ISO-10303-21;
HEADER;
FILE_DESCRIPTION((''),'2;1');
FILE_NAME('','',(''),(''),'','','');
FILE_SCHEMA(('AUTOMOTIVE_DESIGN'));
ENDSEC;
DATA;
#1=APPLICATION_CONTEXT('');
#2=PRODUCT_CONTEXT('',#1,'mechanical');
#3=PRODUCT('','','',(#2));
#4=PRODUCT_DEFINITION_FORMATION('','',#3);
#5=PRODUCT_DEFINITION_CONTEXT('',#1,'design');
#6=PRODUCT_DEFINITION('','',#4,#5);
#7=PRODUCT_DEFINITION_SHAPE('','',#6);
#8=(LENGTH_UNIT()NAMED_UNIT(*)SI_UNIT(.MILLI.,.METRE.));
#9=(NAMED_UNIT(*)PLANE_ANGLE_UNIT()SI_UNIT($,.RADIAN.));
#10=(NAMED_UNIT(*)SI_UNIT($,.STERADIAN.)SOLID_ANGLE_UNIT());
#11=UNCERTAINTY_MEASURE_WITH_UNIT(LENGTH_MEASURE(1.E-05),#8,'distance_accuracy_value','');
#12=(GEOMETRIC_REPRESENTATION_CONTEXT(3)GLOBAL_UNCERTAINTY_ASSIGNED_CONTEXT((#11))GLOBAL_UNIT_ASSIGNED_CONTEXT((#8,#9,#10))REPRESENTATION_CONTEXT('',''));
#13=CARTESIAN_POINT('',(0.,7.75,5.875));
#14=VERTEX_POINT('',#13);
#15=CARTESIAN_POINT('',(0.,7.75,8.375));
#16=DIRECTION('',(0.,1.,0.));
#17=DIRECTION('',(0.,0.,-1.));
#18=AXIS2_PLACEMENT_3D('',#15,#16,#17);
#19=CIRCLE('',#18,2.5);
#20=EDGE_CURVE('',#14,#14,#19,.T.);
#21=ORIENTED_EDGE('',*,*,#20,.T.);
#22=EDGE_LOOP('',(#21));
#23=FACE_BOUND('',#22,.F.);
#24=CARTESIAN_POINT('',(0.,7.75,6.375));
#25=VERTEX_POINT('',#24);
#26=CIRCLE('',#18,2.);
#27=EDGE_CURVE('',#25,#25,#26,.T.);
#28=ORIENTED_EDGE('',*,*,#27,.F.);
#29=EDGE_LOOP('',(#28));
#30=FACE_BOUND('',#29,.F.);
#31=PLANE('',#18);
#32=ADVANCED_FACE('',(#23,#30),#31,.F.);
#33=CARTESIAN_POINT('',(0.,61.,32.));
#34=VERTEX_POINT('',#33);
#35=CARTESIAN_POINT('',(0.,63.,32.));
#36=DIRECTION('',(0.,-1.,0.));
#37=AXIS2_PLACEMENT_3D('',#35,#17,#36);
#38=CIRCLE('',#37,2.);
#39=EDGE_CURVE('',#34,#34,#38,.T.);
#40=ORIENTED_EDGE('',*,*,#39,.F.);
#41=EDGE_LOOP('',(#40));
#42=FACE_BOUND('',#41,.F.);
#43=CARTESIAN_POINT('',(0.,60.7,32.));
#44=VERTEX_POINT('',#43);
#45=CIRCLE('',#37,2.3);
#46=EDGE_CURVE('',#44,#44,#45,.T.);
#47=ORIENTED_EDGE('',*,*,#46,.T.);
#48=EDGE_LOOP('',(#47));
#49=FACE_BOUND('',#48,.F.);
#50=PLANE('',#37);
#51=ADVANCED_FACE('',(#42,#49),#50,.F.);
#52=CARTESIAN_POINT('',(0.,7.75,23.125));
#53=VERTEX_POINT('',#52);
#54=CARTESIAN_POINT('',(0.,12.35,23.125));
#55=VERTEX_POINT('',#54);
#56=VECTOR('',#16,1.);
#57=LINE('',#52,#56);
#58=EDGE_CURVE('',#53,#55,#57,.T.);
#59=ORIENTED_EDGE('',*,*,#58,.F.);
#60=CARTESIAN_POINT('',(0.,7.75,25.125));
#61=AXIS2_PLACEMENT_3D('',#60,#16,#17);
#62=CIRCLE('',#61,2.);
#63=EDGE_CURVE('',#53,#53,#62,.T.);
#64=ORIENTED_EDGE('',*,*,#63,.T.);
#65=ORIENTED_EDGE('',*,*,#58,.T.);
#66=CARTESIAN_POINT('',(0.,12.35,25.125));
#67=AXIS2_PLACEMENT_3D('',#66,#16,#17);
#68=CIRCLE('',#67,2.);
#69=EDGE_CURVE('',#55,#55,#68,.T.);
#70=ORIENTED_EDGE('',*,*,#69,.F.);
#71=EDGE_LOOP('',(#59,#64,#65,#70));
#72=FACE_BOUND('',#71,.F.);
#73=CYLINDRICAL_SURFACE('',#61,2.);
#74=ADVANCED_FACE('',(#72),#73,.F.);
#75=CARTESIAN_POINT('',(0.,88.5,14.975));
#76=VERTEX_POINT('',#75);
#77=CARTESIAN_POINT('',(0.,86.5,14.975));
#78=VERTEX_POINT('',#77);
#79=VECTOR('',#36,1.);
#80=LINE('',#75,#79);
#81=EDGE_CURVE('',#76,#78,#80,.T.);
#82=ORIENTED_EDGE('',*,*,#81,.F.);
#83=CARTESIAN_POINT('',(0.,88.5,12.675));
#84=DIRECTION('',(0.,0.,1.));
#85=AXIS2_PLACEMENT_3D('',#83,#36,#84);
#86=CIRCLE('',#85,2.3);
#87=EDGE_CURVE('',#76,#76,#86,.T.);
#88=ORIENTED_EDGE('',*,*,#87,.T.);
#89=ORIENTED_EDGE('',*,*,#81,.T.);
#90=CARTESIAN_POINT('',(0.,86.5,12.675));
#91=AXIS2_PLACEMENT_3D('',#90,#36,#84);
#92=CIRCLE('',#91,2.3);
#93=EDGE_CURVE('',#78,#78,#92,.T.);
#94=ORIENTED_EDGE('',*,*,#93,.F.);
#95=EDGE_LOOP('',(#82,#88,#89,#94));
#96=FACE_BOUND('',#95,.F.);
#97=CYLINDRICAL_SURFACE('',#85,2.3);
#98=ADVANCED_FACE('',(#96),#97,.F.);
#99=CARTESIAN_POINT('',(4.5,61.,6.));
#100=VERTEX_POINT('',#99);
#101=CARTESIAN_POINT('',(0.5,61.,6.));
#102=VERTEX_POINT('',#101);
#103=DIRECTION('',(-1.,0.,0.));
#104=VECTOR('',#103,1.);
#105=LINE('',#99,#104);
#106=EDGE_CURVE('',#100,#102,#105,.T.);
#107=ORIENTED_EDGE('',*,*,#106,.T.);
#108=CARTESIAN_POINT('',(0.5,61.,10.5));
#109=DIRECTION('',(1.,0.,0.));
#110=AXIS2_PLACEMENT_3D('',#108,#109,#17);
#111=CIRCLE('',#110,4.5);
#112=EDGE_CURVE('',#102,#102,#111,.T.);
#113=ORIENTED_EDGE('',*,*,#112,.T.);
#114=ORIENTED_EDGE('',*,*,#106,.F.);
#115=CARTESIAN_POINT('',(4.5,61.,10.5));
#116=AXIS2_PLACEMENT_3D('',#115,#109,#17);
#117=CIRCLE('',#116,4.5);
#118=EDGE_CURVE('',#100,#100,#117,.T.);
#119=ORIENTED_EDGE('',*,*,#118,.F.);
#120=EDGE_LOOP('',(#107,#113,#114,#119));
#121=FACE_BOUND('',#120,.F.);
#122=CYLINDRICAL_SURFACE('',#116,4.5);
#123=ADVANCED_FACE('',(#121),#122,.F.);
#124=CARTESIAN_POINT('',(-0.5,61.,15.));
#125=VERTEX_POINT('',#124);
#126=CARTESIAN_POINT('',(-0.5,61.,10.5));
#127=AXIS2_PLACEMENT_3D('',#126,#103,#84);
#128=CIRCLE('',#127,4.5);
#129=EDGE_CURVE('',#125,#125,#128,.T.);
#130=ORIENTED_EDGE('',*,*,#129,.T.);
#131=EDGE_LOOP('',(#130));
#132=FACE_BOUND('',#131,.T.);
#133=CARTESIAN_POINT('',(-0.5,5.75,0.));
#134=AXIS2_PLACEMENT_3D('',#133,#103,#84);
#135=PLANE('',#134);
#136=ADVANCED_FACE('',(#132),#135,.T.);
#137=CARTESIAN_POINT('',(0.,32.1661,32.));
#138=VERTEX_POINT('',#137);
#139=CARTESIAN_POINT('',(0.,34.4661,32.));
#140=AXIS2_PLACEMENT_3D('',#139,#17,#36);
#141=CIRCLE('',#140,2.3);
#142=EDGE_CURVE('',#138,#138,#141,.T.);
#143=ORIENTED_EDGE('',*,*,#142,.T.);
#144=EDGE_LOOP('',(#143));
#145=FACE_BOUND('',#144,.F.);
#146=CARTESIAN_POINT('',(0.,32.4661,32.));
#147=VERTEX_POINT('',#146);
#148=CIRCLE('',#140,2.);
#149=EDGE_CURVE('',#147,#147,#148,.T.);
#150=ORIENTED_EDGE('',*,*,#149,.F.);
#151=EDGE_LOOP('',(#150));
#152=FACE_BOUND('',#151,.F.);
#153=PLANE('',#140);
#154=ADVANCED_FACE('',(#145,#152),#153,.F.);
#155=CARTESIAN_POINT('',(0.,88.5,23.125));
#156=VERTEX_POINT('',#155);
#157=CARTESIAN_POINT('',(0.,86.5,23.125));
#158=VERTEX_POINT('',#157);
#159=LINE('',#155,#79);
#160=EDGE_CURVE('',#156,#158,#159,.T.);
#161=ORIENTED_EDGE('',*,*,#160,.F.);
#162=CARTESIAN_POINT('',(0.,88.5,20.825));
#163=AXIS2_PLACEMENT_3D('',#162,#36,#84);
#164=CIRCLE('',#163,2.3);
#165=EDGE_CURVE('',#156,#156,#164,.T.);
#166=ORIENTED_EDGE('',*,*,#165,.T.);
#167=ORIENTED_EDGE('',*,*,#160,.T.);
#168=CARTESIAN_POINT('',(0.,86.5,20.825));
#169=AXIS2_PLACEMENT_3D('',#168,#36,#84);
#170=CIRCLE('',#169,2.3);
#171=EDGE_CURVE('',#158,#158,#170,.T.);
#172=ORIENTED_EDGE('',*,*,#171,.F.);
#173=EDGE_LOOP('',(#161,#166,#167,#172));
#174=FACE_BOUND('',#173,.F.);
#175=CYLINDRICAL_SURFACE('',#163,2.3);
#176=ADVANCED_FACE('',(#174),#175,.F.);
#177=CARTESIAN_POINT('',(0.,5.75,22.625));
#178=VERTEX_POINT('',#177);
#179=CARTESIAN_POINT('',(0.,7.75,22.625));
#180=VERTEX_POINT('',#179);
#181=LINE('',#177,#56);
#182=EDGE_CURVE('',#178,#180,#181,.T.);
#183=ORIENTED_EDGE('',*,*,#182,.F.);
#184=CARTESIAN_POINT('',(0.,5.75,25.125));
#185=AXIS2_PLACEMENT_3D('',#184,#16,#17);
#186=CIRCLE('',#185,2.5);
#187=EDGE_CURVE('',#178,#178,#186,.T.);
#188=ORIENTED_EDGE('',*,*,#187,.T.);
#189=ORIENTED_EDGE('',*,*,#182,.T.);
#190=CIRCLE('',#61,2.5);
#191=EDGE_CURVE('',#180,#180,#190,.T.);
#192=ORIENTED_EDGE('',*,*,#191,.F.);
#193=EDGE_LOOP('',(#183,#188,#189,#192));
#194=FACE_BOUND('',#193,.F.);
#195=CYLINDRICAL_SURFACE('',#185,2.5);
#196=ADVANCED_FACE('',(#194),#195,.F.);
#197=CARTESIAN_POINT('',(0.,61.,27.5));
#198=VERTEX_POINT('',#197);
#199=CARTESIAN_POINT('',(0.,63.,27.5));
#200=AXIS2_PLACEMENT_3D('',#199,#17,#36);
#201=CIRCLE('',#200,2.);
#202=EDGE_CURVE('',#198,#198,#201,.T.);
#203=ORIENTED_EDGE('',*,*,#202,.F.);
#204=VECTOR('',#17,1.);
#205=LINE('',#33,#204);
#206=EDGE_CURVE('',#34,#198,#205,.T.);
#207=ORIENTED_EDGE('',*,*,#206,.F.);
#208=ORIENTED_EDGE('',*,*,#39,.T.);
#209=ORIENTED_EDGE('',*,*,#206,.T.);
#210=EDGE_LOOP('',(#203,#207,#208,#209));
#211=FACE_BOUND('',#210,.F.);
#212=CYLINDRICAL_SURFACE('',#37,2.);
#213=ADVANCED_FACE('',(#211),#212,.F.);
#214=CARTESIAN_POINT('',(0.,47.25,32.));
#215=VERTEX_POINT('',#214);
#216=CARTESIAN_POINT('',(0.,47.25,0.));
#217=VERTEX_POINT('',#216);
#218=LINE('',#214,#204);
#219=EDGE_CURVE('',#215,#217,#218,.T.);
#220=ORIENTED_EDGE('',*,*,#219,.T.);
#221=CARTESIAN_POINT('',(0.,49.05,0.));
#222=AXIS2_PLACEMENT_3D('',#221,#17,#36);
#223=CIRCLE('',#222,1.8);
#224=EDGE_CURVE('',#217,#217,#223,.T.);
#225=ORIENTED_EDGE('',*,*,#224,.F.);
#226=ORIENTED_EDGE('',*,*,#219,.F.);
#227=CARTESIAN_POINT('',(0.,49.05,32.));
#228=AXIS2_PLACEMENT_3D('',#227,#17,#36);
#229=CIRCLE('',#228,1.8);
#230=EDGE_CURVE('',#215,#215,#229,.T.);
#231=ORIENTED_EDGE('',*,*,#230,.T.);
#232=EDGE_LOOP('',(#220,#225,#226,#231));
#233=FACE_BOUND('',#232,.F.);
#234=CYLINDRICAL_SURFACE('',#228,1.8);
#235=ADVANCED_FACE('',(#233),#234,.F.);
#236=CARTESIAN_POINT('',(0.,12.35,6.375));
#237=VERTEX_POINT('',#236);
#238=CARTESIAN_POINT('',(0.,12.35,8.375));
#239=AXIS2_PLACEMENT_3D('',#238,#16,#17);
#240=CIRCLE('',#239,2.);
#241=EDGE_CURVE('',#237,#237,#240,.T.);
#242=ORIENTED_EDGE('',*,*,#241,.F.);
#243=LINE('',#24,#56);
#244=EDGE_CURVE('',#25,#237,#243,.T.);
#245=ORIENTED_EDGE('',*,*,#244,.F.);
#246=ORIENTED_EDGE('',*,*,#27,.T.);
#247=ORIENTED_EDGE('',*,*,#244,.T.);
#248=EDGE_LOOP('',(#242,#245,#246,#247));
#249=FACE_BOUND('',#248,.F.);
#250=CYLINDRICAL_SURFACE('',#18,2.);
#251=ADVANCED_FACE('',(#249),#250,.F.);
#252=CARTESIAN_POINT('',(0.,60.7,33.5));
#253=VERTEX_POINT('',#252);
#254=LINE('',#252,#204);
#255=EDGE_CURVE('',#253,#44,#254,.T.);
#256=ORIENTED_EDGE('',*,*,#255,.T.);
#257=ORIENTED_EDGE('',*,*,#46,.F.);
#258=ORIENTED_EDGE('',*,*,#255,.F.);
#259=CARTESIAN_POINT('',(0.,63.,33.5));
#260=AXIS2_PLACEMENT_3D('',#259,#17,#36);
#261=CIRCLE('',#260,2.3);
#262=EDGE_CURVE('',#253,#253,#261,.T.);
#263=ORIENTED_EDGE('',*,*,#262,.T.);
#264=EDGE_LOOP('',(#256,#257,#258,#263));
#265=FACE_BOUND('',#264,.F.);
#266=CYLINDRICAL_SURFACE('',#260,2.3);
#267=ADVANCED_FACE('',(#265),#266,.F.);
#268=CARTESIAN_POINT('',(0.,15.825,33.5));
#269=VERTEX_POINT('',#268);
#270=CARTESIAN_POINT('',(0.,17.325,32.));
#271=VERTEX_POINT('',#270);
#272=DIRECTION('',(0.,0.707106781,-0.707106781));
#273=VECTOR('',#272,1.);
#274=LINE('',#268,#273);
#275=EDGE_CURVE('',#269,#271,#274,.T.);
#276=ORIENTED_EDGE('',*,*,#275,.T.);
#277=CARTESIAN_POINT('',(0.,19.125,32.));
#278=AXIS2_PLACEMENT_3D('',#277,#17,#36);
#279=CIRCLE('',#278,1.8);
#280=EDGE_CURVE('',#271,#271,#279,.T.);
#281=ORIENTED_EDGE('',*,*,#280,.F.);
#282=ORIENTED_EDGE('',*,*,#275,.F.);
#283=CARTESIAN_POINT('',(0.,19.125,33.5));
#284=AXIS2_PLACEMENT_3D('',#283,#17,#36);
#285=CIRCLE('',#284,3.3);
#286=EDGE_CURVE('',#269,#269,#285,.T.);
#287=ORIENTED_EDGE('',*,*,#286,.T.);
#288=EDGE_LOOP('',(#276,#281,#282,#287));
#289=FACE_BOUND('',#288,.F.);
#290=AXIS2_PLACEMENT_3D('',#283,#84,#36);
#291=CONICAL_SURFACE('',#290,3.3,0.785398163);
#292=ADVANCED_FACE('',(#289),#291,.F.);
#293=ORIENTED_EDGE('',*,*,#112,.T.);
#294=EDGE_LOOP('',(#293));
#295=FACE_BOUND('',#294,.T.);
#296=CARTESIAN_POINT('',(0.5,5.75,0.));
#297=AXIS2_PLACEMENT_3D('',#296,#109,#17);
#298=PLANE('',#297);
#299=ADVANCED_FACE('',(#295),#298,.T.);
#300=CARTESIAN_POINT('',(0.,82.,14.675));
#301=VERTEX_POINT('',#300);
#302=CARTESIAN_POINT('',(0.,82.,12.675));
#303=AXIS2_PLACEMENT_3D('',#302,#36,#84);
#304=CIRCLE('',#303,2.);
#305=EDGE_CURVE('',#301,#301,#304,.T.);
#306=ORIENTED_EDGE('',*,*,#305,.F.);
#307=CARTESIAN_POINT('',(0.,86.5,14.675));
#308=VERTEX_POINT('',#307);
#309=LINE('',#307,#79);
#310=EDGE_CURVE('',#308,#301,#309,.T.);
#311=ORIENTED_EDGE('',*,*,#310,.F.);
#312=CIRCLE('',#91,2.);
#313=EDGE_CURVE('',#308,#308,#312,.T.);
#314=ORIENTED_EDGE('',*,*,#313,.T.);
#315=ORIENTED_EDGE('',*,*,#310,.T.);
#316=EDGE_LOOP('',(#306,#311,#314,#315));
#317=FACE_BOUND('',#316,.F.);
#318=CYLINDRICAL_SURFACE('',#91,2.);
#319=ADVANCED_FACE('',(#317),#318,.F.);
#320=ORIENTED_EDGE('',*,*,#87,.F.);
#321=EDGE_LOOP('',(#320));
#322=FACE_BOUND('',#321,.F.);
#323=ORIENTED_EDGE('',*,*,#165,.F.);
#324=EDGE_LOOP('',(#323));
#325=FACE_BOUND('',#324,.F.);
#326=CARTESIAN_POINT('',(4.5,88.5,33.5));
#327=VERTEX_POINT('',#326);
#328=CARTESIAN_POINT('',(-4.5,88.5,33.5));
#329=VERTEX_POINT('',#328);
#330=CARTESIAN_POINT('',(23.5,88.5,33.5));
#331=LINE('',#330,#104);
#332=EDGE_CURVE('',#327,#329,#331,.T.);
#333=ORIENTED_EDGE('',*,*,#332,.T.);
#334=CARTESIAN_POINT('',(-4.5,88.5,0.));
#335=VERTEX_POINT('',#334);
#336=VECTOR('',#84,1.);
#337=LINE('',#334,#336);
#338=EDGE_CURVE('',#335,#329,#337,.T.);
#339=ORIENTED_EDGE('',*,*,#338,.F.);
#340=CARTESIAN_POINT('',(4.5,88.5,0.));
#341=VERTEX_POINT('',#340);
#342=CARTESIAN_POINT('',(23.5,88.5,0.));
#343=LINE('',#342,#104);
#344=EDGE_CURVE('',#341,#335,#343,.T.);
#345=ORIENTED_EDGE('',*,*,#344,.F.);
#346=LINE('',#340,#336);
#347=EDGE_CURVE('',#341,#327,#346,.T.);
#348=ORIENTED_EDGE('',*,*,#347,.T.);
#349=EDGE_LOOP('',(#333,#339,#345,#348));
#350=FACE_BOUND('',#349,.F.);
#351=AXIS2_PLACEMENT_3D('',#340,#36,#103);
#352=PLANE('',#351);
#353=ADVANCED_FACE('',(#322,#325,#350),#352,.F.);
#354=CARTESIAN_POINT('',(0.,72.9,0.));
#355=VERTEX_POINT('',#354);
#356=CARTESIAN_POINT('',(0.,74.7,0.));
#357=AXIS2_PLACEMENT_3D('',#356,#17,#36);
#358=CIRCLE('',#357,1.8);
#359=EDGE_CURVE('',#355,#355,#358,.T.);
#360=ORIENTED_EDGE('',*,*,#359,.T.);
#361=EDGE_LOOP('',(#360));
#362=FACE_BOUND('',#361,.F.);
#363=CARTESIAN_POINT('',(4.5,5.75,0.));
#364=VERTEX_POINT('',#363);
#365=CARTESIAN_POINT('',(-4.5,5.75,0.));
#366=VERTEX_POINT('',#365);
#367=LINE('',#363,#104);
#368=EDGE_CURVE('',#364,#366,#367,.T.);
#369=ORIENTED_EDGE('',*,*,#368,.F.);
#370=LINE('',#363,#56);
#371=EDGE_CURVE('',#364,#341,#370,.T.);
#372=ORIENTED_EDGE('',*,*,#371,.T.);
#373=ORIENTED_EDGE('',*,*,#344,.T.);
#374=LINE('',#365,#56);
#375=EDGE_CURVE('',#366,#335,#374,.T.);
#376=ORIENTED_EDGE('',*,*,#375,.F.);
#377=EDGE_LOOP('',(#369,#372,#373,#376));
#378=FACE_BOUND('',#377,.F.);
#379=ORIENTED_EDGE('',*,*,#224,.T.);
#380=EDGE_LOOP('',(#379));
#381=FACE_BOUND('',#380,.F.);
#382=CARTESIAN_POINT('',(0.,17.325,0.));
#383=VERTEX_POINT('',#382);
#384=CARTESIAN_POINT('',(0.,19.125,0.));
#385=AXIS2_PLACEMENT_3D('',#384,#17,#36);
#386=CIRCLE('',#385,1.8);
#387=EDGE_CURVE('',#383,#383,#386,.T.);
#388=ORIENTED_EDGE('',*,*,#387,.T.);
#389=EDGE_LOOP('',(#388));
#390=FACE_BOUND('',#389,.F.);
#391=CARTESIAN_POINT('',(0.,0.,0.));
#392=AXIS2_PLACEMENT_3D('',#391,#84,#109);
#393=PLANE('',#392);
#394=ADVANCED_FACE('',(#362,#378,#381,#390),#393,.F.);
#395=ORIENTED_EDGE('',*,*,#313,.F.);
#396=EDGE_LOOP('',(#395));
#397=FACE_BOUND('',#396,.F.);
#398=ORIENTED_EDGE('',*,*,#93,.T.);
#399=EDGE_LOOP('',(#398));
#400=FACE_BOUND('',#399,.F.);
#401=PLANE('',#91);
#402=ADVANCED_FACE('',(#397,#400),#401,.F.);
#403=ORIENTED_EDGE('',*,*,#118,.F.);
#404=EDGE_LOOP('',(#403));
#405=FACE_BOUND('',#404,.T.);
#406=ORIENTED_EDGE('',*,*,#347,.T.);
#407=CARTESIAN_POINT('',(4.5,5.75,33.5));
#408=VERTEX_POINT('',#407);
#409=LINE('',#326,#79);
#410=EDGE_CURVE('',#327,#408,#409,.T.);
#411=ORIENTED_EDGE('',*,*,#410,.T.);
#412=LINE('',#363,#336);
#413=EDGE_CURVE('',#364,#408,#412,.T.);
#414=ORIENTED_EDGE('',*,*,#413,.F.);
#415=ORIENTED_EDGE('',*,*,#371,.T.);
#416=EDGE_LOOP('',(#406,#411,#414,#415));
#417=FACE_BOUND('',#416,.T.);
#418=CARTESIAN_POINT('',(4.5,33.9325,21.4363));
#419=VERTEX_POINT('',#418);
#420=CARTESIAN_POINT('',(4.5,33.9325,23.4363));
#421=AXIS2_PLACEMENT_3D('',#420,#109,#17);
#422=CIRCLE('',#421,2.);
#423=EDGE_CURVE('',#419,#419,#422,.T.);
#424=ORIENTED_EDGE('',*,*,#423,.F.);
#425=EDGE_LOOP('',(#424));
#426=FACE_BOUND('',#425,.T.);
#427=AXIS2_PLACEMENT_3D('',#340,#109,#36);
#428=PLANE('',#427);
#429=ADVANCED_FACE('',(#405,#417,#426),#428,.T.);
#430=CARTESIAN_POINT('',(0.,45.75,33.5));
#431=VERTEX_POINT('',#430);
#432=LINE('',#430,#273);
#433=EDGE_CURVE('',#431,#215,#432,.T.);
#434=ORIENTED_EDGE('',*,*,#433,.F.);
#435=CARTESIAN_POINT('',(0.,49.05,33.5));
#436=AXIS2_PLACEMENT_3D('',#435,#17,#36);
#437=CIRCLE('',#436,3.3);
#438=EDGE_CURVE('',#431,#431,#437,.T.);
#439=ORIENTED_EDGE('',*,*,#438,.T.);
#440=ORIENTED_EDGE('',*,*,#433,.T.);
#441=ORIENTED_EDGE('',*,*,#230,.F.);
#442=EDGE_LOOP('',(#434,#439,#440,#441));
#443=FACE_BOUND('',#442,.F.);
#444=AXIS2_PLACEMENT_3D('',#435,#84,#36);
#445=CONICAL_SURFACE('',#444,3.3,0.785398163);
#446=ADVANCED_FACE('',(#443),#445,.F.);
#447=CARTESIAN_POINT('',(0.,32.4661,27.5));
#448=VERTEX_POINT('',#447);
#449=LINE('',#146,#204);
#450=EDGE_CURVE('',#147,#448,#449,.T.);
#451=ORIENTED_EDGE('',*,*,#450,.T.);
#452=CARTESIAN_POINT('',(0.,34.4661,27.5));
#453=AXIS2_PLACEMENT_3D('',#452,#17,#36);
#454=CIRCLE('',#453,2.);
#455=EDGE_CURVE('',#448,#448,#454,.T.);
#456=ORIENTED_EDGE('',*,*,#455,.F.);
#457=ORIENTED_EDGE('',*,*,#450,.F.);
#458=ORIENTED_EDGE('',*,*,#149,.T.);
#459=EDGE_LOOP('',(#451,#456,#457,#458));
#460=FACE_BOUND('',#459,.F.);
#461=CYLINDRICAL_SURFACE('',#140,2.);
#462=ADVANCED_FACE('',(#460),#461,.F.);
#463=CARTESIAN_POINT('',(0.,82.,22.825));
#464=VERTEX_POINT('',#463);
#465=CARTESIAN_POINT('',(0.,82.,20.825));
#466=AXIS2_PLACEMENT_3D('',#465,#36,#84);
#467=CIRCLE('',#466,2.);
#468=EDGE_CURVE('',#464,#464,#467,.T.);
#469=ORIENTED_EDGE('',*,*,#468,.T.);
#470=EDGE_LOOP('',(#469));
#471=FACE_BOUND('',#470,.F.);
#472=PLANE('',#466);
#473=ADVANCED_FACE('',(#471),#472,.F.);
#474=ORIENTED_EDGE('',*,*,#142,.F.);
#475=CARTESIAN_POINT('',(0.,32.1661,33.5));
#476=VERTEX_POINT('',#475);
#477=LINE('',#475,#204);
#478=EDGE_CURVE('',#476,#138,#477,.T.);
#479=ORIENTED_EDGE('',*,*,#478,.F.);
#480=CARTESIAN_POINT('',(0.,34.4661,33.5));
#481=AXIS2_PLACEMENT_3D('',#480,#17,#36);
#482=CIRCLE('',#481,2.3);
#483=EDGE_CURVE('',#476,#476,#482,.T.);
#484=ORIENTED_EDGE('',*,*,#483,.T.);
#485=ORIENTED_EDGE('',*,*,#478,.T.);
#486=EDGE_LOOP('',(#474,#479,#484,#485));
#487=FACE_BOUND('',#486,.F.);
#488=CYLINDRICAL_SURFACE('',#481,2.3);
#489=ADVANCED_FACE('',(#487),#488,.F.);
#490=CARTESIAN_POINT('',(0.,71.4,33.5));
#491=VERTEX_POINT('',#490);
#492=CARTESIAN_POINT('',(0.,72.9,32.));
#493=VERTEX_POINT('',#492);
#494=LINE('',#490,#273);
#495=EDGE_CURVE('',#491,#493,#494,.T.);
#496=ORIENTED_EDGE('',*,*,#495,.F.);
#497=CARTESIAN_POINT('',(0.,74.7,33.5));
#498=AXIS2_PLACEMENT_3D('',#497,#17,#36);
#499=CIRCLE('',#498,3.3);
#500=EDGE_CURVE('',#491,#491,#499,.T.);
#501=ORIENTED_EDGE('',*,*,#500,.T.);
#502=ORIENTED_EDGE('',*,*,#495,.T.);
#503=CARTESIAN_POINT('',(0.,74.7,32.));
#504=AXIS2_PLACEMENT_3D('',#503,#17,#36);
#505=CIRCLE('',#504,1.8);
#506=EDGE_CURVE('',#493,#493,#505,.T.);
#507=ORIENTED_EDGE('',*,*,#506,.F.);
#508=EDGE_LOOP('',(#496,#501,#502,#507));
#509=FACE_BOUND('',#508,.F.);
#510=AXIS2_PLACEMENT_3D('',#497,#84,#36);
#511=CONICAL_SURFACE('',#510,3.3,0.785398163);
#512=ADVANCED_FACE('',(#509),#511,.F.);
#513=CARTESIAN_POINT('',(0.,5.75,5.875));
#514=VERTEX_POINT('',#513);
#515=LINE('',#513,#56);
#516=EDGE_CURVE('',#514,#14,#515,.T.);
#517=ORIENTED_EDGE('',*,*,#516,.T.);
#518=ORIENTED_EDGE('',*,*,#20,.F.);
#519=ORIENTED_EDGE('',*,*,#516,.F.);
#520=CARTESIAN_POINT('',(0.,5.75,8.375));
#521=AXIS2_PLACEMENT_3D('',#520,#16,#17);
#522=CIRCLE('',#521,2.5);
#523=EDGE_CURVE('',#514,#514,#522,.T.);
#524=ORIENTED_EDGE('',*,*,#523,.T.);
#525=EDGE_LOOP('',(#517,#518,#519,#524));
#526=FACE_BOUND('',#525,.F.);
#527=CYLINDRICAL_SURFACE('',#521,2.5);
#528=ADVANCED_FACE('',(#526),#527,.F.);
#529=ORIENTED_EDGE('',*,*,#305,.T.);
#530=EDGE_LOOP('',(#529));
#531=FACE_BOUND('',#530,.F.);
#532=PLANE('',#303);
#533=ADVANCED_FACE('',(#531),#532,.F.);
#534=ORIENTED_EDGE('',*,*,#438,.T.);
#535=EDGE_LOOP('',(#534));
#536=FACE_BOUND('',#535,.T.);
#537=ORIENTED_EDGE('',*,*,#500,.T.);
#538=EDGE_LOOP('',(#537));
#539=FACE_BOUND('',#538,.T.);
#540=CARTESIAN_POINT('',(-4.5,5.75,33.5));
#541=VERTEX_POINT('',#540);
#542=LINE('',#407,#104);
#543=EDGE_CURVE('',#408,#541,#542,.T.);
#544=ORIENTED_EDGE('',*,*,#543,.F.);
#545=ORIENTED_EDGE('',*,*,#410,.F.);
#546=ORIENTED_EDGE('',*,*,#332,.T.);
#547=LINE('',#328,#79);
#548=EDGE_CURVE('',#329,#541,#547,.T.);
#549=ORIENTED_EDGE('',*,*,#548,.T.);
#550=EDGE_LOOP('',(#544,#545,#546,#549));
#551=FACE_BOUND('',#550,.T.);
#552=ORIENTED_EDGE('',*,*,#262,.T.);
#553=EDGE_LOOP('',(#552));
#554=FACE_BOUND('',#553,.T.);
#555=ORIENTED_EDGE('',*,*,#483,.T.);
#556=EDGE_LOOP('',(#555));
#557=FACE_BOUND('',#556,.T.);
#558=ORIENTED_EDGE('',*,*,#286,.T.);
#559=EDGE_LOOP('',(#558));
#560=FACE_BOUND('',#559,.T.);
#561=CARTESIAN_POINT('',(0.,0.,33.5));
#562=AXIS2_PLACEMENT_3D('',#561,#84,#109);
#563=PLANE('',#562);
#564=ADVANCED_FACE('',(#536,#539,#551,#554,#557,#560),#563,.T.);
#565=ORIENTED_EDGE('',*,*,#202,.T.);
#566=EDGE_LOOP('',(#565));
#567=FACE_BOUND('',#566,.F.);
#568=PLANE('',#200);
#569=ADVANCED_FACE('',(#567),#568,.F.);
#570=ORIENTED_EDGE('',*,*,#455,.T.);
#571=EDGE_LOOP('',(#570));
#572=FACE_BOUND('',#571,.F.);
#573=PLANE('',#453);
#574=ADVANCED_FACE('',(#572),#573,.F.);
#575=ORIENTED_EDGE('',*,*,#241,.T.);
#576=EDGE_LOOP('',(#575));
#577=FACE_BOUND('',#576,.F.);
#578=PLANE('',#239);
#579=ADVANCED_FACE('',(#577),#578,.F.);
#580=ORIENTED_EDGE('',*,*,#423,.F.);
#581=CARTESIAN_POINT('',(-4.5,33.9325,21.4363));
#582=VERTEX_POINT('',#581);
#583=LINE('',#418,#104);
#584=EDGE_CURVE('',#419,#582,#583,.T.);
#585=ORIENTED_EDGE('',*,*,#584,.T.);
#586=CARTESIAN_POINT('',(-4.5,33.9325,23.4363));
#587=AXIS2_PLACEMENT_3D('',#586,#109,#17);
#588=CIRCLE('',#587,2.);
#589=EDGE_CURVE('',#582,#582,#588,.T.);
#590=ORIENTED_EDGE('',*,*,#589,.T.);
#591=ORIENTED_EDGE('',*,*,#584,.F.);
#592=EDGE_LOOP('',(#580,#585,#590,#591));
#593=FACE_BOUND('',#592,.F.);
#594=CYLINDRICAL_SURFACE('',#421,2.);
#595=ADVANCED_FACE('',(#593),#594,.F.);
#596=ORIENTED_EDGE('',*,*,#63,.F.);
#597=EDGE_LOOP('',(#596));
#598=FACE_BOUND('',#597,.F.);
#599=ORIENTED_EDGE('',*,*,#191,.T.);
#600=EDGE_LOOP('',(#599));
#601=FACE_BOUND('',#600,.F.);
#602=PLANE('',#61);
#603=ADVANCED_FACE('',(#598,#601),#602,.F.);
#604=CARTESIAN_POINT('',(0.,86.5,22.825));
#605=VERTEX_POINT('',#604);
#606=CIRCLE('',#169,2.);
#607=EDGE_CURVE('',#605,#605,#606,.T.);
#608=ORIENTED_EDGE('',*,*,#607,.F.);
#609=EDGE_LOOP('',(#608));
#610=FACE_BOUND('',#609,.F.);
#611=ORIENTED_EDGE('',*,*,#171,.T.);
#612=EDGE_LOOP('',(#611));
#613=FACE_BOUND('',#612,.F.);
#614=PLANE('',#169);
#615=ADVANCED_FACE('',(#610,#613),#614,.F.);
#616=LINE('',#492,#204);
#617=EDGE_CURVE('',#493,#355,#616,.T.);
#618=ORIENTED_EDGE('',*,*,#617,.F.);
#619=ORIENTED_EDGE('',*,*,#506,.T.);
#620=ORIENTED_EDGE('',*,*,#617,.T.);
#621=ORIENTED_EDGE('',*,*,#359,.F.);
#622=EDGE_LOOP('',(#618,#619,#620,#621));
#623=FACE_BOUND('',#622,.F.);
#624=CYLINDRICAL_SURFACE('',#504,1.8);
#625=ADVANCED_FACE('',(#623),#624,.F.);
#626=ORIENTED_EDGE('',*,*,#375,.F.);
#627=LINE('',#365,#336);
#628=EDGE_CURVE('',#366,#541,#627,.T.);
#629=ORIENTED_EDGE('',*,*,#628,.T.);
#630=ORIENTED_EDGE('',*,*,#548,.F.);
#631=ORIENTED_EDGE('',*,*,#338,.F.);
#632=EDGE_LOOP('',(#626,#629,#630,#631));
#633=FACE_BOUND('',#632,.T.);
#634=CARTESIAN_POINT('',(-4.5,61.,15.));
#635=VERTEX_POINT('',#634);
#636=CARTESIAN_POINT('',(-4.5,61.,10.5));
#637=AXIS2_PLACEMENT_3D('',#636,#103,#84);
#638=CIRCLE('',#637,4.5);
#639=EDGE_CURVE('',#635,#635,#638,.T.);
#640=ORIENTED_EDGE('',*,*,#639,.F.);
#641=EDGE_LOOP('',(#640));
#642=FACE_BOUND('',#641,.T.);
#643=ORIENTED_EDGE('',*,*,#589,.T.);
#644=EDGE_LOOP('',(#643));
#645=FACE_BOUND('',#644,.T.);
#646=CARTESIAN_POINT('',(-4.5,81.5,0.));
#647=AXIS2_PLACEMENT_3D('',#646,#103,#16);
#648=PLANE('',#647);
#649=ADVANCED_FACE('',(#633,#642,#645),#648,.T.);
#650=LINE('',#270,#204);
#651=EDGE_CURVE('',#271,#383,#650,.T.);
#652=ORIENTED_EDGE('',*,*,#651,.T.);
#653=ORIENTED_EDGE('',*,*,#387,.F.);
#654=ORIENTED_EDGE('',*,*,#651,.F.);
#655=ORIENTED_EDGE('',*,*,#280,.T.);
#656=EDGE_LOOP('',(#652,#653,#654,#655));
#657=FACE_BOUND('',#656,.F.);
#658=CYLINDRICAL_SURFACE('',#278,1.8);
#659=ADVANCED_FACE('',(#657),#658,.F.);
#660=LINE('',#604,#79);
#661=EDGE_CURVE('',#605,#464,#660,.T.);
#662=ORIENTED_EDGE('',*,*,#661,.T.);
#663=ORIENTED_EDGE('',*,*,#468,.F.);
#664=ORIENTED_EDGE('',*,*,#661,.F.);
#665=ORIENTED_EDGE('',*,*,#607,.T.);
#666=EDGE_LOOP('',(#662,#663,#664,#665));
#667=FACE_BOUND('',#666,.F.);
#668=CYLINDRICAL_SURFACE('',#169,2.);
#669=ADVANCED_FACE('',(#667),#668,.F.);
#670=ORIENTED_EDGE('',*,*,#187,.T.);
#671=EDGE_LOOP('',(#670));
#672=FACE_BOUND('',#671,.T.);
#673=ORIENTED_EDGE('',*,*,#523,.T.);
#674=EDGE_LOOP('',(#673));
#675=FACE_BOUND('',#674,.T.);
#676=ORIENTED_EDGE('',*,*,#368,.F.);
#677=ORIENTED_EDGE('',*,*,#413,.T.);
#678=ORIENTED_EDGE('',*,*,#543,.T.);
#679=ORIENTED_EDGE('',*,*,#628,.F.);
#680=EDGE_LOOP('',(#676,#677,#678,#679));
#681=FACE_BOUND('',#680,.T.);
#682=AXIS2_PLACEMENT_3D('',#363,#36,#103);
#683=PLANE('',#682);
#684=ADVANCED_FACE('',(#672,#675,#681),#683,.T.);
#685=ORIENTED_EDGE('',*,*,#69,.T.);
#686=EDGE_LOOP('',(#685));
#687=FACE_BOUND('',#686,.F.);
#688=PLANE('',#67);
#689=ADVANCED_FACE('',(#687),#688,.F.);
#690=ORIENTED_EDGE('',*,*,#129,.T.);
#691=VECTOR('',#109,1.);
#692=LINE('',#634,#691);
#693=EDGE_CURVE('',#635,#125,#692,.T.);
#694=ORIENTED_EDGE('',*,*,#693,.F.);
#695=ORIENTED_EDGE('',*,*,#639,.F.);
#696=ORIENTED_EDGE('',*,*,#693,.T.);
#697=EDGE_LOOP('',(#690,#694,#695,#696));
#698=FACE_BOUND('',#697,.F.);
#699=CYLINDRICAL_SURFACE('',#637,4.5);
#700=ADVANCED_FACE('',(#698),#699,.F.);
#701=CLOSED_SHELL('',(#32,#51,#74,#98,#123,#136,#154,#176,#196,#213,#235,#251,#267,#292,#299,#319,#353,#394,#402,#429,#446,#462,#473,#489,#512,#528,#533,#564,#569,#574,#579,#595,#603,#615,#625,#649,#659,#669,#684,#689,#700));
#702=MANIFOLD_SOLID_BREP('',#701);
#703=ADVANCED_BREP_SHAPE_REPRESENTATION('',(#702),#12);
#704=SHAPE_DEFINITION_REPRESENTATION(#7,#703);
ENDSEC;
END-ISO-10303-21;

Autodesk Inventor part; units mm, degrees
ref_plane "YZ Plane" through (0, 0, 0) normal (1, 0, 0) x (0, 1, 0)
ref_plane "XZ Plane" through (0, 0, 0) normal (0, 1, 0) x (-1, 0, 0)
ref_plane "Work Plane1" through (0, 0, 0) normal (0, 0, 1) x (1, 0, 0)
ref_plane "Work Plane2" through (-89, -40.3889, 33.5) normal (0, 0, 1) x (1, 0, 0)
sketch "Sketch1" plane through (0, 0, 0) normal (0, 0, 1) x (1, 0, 0)
  line L0 (23.5, 88.5) -> (-23.5, 88.5) projected
  line L1 (-23.5, 88.5) -> (-23.5, 36.5) projected
  line L2 (-26.5, 33.5) -> (-89, 33.5) projected
  line L3 (-89, 33.5) -> (-89, -72.5) projected
  line L4 (-89, -72.5) -> (-77, -72.5) projected
  line L5 (-74, -75.5) -> (-74, -93.5) projected
  line L6 (-74, -93.5) -> (74, -93.5) projected
  line L7 (74, -93.5) -> (74, -75.5) projected
  line L8 (77, -72.5) -> (89, -72.5) projected
  line L9 (89, -72.5) -> (89, 33.5) projected
  line L10 (89, 33.5) -> (26.5, 33.5) projected
  line L11 (23.5, 36.5) -> (23.5, 88.5) projected
  line L12 (-4.5, 81.5) -> (-4.5, 36.5) projected
  line L13 (-7.5, 33.5) -> (-13.5, 33.5) projected
  line L14 (-16.5, 36.5) -> (-16.5, 81.5) projected
  line L15 (7.5, 84.5) -> (13.5, 84.5) projected
  line L16 (16.5, 81.5) -> (16.5, 36.5) projected
  line L17 (13.5, 33.5) -> (7.5, 33.5) projected
  line L18 (4.5, 36.5) -> (4.5, 81.5) projected
  line L19 (-13.5, 84.5) -> (-7.5, 84.5) projected
  line L20 (-4.5, 88.5) -> (4.5, 88.5)
  line L21 (4.5, 88.5) -> (4.5, 5.75)
  line L22 (4.5, 5.75) -> (-4.5, 5.75)
  line L23 (-4.5, 5.75) -> (-4.5, 88.5)
  line L24 (-32.2, 4.75) -> (-59.9, 4.75)
  arc A0 (13.5, 33.5) -> (16.5, 36.5) centre (13.5, 36.5) ccw projected
  arc A1 (4.5, 36.5) -> (7.5, 33.5) centre (7.5, 36.5) ccw projected
  arc A2 (7.5, 84.5) -> (4.5, 81.5) centre (7.5, 81.5) ccw projected
  arc A3 (16.5, 81.5) -> (13.5, 84.5) centre (13.5, 81.5) ccw projected
  arc A4 (-4.5, 81.5) -> (-7.5, 84.5) centre (-7.5, 81.5) ccw projected
  arc A5 (-7.5, 33.5) -> (-4.5, 36.5) centre (-7.5, 36.5) ccw projected
  arc A6 (-16.5, 36.5) -> (-13.5, 33.5) centre (-13.5, 36.5) ccw projected
  arc A7 (-13.5, 84.5) -> (-16.5, 81.5) centre (-13.5, 81.5) ccw projected
  arc A8 (-26.5, 33.5) -> (-23.5, 36.5) centre (-26.5, 36.5) ccw projected
  arc A9 (-74, -75.5) -> (-77, -72.5) centre (-77, -75.5) ccw projected
  arc A10 (77, -72.5) -> (74, -75.5) centre (77, -75.5) ccw projected
  arc A11 (23.5, 36.5) -> (26.5, 33.5) centre (26.5, 36.5) ccw projected
  circle A12 centre (39.125, 25.9125) radius 1.0065 projected
  circle A13 centre (72.95, 12.275) radius 1.0065 projected
  circle A14 centre (86, 30.5) radius 1.0065 projected
  circle A15 centre (-86, 30.5) radius 1.0065 projected
  circle A16 centre (-39.125, 12.3375) radius 1.0065 projected
  circle A17 centre (-72.95, 25.975) radius 1.0065 projected
  circle A18 centre (-72.95, 12.275) radius 1.0065 projected
  circle A19 centre (-39.125, 25.9125) radius 1.0065 projected
  circle A20 centre (-86, 7.75) radius 1.0065 projected
  circle A21 centre (86, 7.75) radius 1.0065 projected
  circle A22 centre (72.95, 25.975) radius 1.0065 projected
  circle A23 centre (39.125, 12.3375) radius 1.0065 projected
  circle A24 centre (-24.1, -73.1) radius 1.2295 projected
  circle A25 centre (-42.4984, -44.6666) radius 1.2295 projected
  circle A26 centre (-79, -42.3889) radius 1.2295 projected
  circle A27 centre (-19.5, 28.875) radius 1.2295 projected
  circle A28 centre (19.5, 9.55) radius 1.2295 projected
  circle A29 centre (19.5, 47.3) radius 1.2295 projected
  circle A30 centre (-19.5, 47.3) radius 1.2295 projected
  circle A31 centre (0, 74.7) radius 1.2295 projected
  circle A32 centre (-19.4231, 74.8077) radius 1.2295 projected
  circle A33 centre (19.5, 74.7) radius 1.2295 projected
  circle A34 centre (0, 49.05) radius 1.2295 projected
  circle A35 centre (19.5, 28.875) radius 1.2295 projected
  circle A36 centre (0, 19.125) radius 1.2295 projected
  circle A37 centre (-19.5, 9.55) radius 1.2295 projected
  circle A38 centre (24.1, -73.1) radius 1.2295 projected
  circle A39 centre (42.5, -44.6649) radius 1.2295 projected
  circle A40 centre (79, -42.3889) radius 1.2295 projected
  circle A41 centre (21.5, -85.5) radius 1.8 projected
  circle A42 centre (-64.5, -85.5) radius 1.8 projected
  circle A43 centre (-83.4, -19.2889) radius 1.8 projected
  circle A44 centre (-21.5, -85.5) radius 1.8 projected
  circle A45 centre (64.5, -85.5) radius 1.8 projected
  line L25 (-58.2315, -77.6013) -> (-77.7685, -63.3434) projected
  line L26 (-79, -36.3889) -> (-79, 1.75) projected
  line L27 (-75.7766, -45.4056) -> (-47.1423, -47.5438) projected
  line L28 (-21.1, -26.5751) -> (-21.1, -22.0255) projected
  line L29 (-46.9357, -41.5592) -> (-76, -39.3889) projected
  line L30 (-79, -60.9201) -> (-79, -48.3972) projected
  line L31 (32.0924, 4.75) -> (76, 4.75) projected
  line L32 (79, 1.75) -> (79, -36.3889) projected
  line L33 (76, -39.3889) -> (46.9371, -41.5577) projected
  line L34 (21.1, -22.0255) -> (21.1, -26.5749) projected
  line L35 (47.144, -47.5423) -> (76, -45.3889) projected
  line L36 (79, -48.3889) -> (79, -60.9201) projected
  line L37 (77.7685, -63.3434) -> (58.2315, -77.6013) projected
  line L38 (57, -80.0246) -> (57, -87.5) projected
  arc A46 (55, -89.5) -> (57, -87.5) centre (55, -87.5) ccw projected
  line L39 (55, -89.5) -> (31, -89.5) projected
  arc A47 (29, -87.5) -> (31, -89.5) centre (31, -87.5) ccw projected
  line L40 (29, -87.5) -> (29, -79.2522) projected
  line L41 (14, -79.5039) -> (14, -87.5) projected
  arc A48 (12, -89.5) -> (14, -87.5) centre (12, -87.5) ccw projected
  line L42 (12, -89.5) -> (-12, -89.5) projected
  arc A49 (-14, -87.5) -> (-12, -89.5) centre (-12, -87.5) ccw projected
  line L43 (-14, -87.5) -> (-14, -79.5039) projected
  line L44 (-29, -79.2522) -> (-29, -87.5) projected
  arc A50 (-31, -89.5) -> (-29, -87.5) centre (-31, -87.5) ccw projected
  line L45 (-31, -89.5) -> (-55, -89.5) projected
  arc A51 (-57, -87.5) -> (-55, -89.5) centre (-55, -87.5) ccw projected
  line L46 (-57, -87.5) -> (-57, -80.0246) projected
  line L47 (-66.95, 28.9125) -> (-45.125, 28.9125) projected
  line L48 (-42.125, 25.9125) -> (-42.125, 12.275) projected
  line L49 (-45.125, 9.275) -> (-66.95, 9.275) projected
  line L50 (-69.95, 12.275) -> (-69.95, 25.9125) projected
  line L51 (-16.5, 12.75) -> (-16.5, 25.5) projected
  line L52 (-13.5, 28.5) -> (-7.5, 28.5) projected
  line L53 (-4.5, 25.5) -> (-4.5, 12.75) projected
  line L54 (-7.5, 9.75) -> (-13.5, 9.75) projected
  line L55 (66.95, 9.3375) -> (45.125, 9.3375) projected
  line L56 (42.125, 12.3375) -> (42.125, 25.975) projected
  line L57 (45.125, 28.975) -> (66.95, 28.975) projected
  line L58 (69.95, 25.975) -> (69.95, 12.3375) projected
  line L59 (4.5, 12.75) -> (4.5, 25.5) projected
  line L60 (7.5, 28.5) -> (13.5, 28.5) projected
  line L61 (16.5, 25.5) -> (16.5, 12.75) projected
  line L62 (13.5, 9.75) -> (7.5, 9.75) projected
  line L63 (44.5181, -40.6102) -> (28.0046, -22.8717) projected
  line L64 (27.2109, -20.577) -> (29.1029, 2.0005) projected
  line L65 (-44.7206, -49.1201) -> (-29.3549, -77.8368) projected
  line L66 (-76, 4.75) -> (-32.0924, 4.75) projected
  line L67 (-29.1029, 2.0005) -> (-27.2109, -20.5772) projected
  line L68 (-28.0044, -22.8717) -> (-44.5164, -40.6115) projected
  line L69 (29.3549, -77.8368) -> (44.7222, -49.1185) projected
  line L70 (-14.6042, -77.6983) -> (-37.8537, -46.8489) projected
  line L71 (-37.4786, -42.8259) -> (-22.0793, -28.7924) projected
  line L72 (-21.1105, -21.775) -> (-23.0609, 1.4995) projected
  line L73 (-20.0714, 4.75) -> (20.0714, 4.75) projected
  line L74 (23.0609, 1.4995) -> (21.1105, -21.775) projected
  line L75 (22.0795, -28.7925) -> (37.4798, -42.8243) projected
  line L76 (37.8551, -46.8475) -> (14.6042, -77.6983) projected
  circle A52 centre (-78, -67.1725) radius 1.2295 projected
  arc A53 (76, -39.3889) -> (79, -36.3889) centre (76, -36.3889) ccw projected
  arc A54 (44.5181, -40.6102) -> (46.9371, -41.5577) centre (46.7138, -38.566) ccw projected
  arc A55 (27.2109, -20.577) -> (28.0046, -22.8717) centre (30.2004, -20.8276) ccw projected
  arc A56 (32.0924, 4.75) -> (29.1029, 2.0005) centre (32.0924, 1.75) ccw projected
  arc A57 (79, 1.75) -> (76, 4.75) centre (76, 1.75) ccw projected
  arc A58 (-42.125, 25.9125) -> (-45.125, 28.9125) centre (-45.125, 25.9125) ccw projected
  arc A59 (-45.125, 9.275) -> (-42.125, 12.275) centre (-45.125, 12.275) ccw projected
  arc A60 (-69.95, 12.275) -> (-66.95, 9.275) centre (-66.95, 12.275) ccw projected
  arc A61 (-66.95, 28.9125) -> (-69.95, 25.9125) centre (-66.95, 25.9125) ccw projected
  arc A62 (-13.5, 28.5) -> (-16.5, 25.5) centre (-13.5, 25.5) ccw projected
  arc A63 (-4.5, 25.5) -> (-7.5, 28.5) centre (-7.5, 25.5) ccw projected
  arc A64 (-7.5, 9.75) -> (-4.5, 12.75) centre (-7.5, 12.75) ccw projected
  arc A65 (-16.5, 12.75) -> (-13.5, 9.75) centre (-13.5, 12.75) ccw projected
  arc A66 (58.2315, -77.6013) -> (57, -80.0246) centre (60, -80.0246) ccw projected
  arc A67 (29.3549, -77.8368) -> (29, -79.2522) centre (32, -79.2522) ccw projected
  arc A68 (47.144, -47.5423) -> (44.7222, -49.1185) centre (47.3673, -50.5339) ccw projected
  arc A69 (79, -48.3889) -> (76, -45.3889) centre (76, -48.3889) ccw projected
  arc A70 (77.7685, -63.3434) -> (79, -60.9201) centre (76, -60.9201) ccw projected
  arc A71 (-21.1, -22.0255) -> (-21.1105, -21.775) centre (-24.1, -22.0255) ccw projected
  arc A72 (-20.0714, 4.75) -> (-23.0609, 1.4995) centre (-20.0714, 1.75) ccw projected
  arc A73 (23.0609, 1.4995) -> (20.0714, 4.75) centre (20.0714, 1.75) ccw projected
  arc A74 (21.1105, -21.775) -> (21.1, -22.0255) centre (24.1, -22.0255) ccw projected
  arc A75 (21.1, -26.5749) -> (22.0795, -28.7925) centre (24.1, -26.5749) ccw projected
  arc A76 (37.8551, -46.8475) -> (37.4798, -42.8243) centre (35.4593, -45.0419) ccw projected
  arc A77 (14.6042, -77.6983) -> (14, -79.5039) centre (17, -79.5039) ccw projected
  arc A78 (-14, -79.5039) -> (-14.6042, -77.6983) centre (-17, -79.5039) ccw projected
  arc A79 (-37.4786, -42.8259) -> (-37.8537, -46.8489) centre (-35.4579, -45.0433) ccw projected
  arc A80 (-22.0793, -28.7924) -> (-21.1, -26.5751) centre (-24.1, -26.5751) ccw projected
  arc A81 (-79, -36.3889) -> (-76, -39.3889) centre (-76, -36.3889) ccw projected
  arc A82 (-76, 4.75) -> (-79, 1.75) centre (-76, 1.75) ccw projected
  arc A83 (-29.1029, 2.0005) -> (-32.0924, 4.75) centre (-32.0924, 1.75) ccw projected
  arc A84 (-28.0044, -22.8717) -> (-27.2109, -20.5772) centre (-30.2004, -20.8277) ccw projected
  arc A85 (-46.9357, -41.5592) -> (-44.5164, -40.6115) centre (-46.7123, -38.5676) ccw projected
  arc A86 (7.5, 28.5) -> (4.5, 25.5) centre (7.5, 25.5) ccw projected
  arc A87 (16.5, 25.5) -> (13.5, 28.5) centre (13.5, 25.5) ccw projected
  arc A88 (13.5, 9.75) -> (16.5, 12.75) centre (13.5, 12.75) ccw projected
  arc A89 (4.5, 12.75) -> (7.5, 9.75) centre (7.5, 12.75) ccw projected
  arc A90 (-57, -80.0246) -> (-58.2315, -77.6013) centre (-60, -80.0246) ccw projected
  arc A91 (-79, -60.9201) -> (-77.7685, -63.3434) centre (-76, -60.9201) ccw projected
  arc A92 (-75.7766, -45.4056) -> (-79, -48.3972) centre (-76, -48.3972) ccw projected
  arc A93 (-44.7206, -49.1201) -> (-47.1423, -47.5438) centre (-47.3657, -50.5355) ccw projected
  arc A94 (-29, -79.2522) -> (-29.3549, -77.8368) centre (-32, -79.2522) ccw projected
  arc A95 (42.125, 12.3375) -> (45.125, 9.3375) centre (45.125, 12.3375) ccw projected
  arc A96 (45.125, 28.975) -> (42.125, 25.975) centre (45.125, 25.975) ccw projected
  arc A97 (69.95, 25.975) -> (66.95, 28.975) centre (66.95, 25.975) ccw projected
  arc A98 (66.95, 9.3375) -> (69.95, 12.3375) centre (66.95, 12.3375) ccw projected
  circle A99 centre (78, -67.1725) radius 1.2295 projected
  circle A100 centre (83.4, -16.3889) radius 1.8 projected
  circle A101 centre (24.1, -24.9) radius 1.2295 projected
  circle A102 centre (-24.1, -24.9) radius 1.2295 projected
  point P0 (0, 0)
  point P1 (-4.5, 81.5)
  point P2 (-4.5, 36.5)
  point P3 (7.5, 81.5)
  point P4 (13.5, 81.5)
  point P5 (-7.5, 81.5)
  point P6 (-13.5, 81.5)
  point P7 (39, -44.2094)
  point P8 (-4.5, 28.5)
  point P9 (-4.5, 9.75)
  point P10 (4.5, 9.75)
  point P11 (4.5, 28.5)
  point P12 (-79, -67.8878)
  point P13 (-79, -66.4572)
  dimension "d41" = 1
extrude "Extrusion1" add sketch "Sketch1" along normal up to surface (33.5 mm away) contours L21 L18 L22 L23 L12 L0 | A31 | A34 | A36
sketch "Sketch2" plane through (4.5, 5.75, 0) normal (1, 0, 0) x (0, 0, -1)
  circle A0 centre (-23.4363, 28.1825) radius 2 projected
  point P0 (0, -5.75)
extrude "Extrusion2" cut sketch "Sketch2" against normal blind 10
sketch "Sketch3" plane through (4.5, 5.75, 0) normal (1, 0, 0) x (0, 0, -1)
  circle A0 centre (-10.5, 55.25) radius 4.5 projected
  point P0 (0, -5.75)
extrude "Extrusion3" cut sketch "Sketch3" against normal blind 4
sketch "Sketch4" plane through (-4.5, 5.75, 0) normal (-1, 0, 0) x (0, 0, 1)
  circle A0 centre (10.5, 55.25) radius 4.5 projected
  point P0 (0, -5.75)
extrude "Extrusion4" cut sketch "Sketch4" against normal blind 4
sketch "Sketch5" plane through (-4.5, 5.75, 33.5) normal (0, 0, 1) x (1, 0, 0)
  line L0 (5, 59.75) -> (5, 50.75) projected
  line L1 (4, 50.75) -> (4, 59.75) projected
  line L2 (9, 26.1825) -> (0, 26.1825) projected
  line L3 (9, 30.1825) -> (0, 30.1825) projected
  line L4 (17, 78.15) -> (-8, 78.15)
  line L5 (-8, 35.85) -> (17, 35.85)
  line L6 (9, 82.75) -> (9, 0) projected
  line L7 (0, 50.75) -> (0, 59.75) projected
  line L8 (9, 35.85) -> (0, 35.85)
  line L9 (0, 35.85) -> (0, 50.75)
  line L10 (0, 50.75) -> (9, 50.75)
  line L11 (9, 50.75) -> (9, 35.85)
  line L12 (0, 0) -> (0, 82.75) projected
  line L13 (9, 78.15) -> (0, 78.15)
  line L14 (0, 78.15) -> (0, 59.75)
  line L15 (0, 59.75) -> (9, 59.75)
  line L16 (9, 59.75) -> (9, 78.15)
  line L17 (-18, 6.625) -> (-18, 20.125) projected
  line L18 (-18, 13.375) -> (27, 13.375)
  line L19 (9, 35.85) -> (0, 50.75)
  line L20 (9, 59.75) -> (9, 50.75) projected
  line L21 (0, 35.85) -> (9, 50.75)
  line L22 (9, 59.75) -> (0, 78.15)
  line L23 (0, 59.75) -> (9, 78.15)
  point P0 (4.5, -5.75)
  point P1 (4.5, 13.375)
  point P2 (4.5, 43.3)
  point P3 (4.5, 68.95)
  dimension "d9" = 4.5
  dimension "d10" = 4.5
hole "Hole1" at (0, 19.125, 33.5) at (0, 49.05, 33.5) at (0, 74.7, 33.5) direction (0, 0, -1) diameter 3.6 end through all countersink diameter 6.6 countersink angle 90 clearance for "Countersunk Flat Head Screw ISO 2009/7046" size "M3" standard "ISO"
sketch "Sketch6" plane through (-4.5, 5.75, 0) normal (0, -1, 0) x (1, 0, 0)
  line L0 (9, 33.5) -> (0, 33.5) projected
  line L1 (0, 0) -> (0, 33.5) projected
  line L2 (0, 0) -> (9, 0) projected
  line L3 (9, 0) -> (9, 33.5) projected
  line L4 (0, 16.75) -> (9, 16.75)
  line L5 (9, 16.75) -> (0, 33.5)
  line L6 (9, 33.5) -> (0, 16.75)
  line L7 (0, 16.75) -> (9, 0)
  line L8 (9, 16.75) -> (0, 0)
  point P0 (4.5, 0)
  point P1 (4.5, 8.375)
  point P2 (4.5, 25.125)
hole "Hole2" at (0, 5.75, 8.375) at (0, 5.75, 25.125) direction (0, 1, 0) diameter 4 depth 6.6 counterbore diameter 5 counterbore depth 2
sketch "Sketch7" plane through (-4.5, 88.5, 0) normal (0, 1, 0) x (1, 0, 0)
  line L0 (0, -33.5) -> (9, -33.5) projected
  line L1 (0, -33.5) -> (9, -33.5) projected
  line L2 (9, 0) -> (9, -33.5) projected
  line L3 (9, 0) -> (0, 0) projected
  line L4 (0, 0) -> (0, -33.5) projected
  line L5 (-8, -1.4) -> (-8, -6.6) projected
  line L6 (-8, -32.1) -> (-8, -26.9) projected
  line L7 (17, -32.1) -> (17, -26.9) projected
  line L8 (17, -1.4) -> (17, -6.6) projected
  line L9 (17, -32.1) -> (-8, -32.1)
  line L10 (-8, -32.1) -> (-8, -26.9)
  line L11 (-8, -26.9) -> (17, -26.9)
  line L12 (17, -26.9) -> (17, -32.1)
  line L13 (-8, -6.6) -> (17, -6.6)
  line L14 (17, -6.6) -> (17, -1.4)
  line L15 (17, -1.4) -> (-8, -1.4)
  line L16 (-8, -1.4) -> (-8, -6.6)
  line L17 (17, -6.6) -> (-8, -6.6)
  line L18 (-8, -6.6) -> (-8, -8.6)
  line L19 (-8, -8.6) -> (17, -8.6)
  line L20 (17, -8.6) -> (17, -6.6)
  line L21 (-8, -26.9) -> (17, -26.9)
  line L22 (17, -26.9) -> (17, -24.9)
  line L23 (17, -24.9) -> (-8, -24.9)
  line L24 (-8, -24.9) -> (-8, -26.9)
  line L25 (9, 0) -> (9, -33.5) projected
  line L26 (9, -16.75) -> (0, -16.75)
  line L27 (0, 0) -> (0, -33.5) projected
  line L28 (9, -24.9) -> (0, -16.75)
  line L29 (9, -8.6) -> (0, -16.75)
  line L30 (0, -8.6) -> (9, -16.75)
  line L31 (9, -16.75) -> (0, -24.9)
  point P0 (4.5, 0)
  point P1 (4.5, -20.825)
  point P2 (4.5, -12.675)
  dimension "d25" = 2
  dimension "d26" = 2
hole "Hole3" at (0, 88.5, 20.825) at (0, 88.5, 12.675) direction (0, -1, 0) diameter 4 depth 6.5 counterbore diameter 4.6 counterbore depth 2
sketch "Sketch8" plane through (-4.5, 5.75, 33.5) normal (0, 0, 1) x (1, 0, 0)
  line L0 (26, 27.2497) -> (-17, 27.2497)
  line L1 (26, 31.2497) -> (-17, 31.2497)
  line L2 (4, 52.75) -> (-1, 52.75)
  line L3 (4, 61.75) -> (-1, 61.75)
  line L4 (10, 61.75) -> (5, 61.75)
  line L5 (9, 50.75) -> (5, 50.75) projected
  line L6 (0, 0) -> (0, 82.75) projected
  line L7 (9, 52.75) -> (0, 52.75)
  line L8 (0, 52.75) -> (0, 61.75)
  line L9 (0, 61.75) -> (9, 61.75)
  line L10 (9, 61.75) -> (9, 50.75)
  line L11 (9, 26.1825) -> (0, 26.1825) projected
  line L12 (0, 31.2497) -> (9, 31.2497)
  line L13 (9, 31.2497) -> (9, 26.1825)
  line L14 (9, 26.1825) -> (0, 26.1825)
  line L15 (0, 26.1825) -> (0, 31.2497)
  line L16 (9, 26.1825) -> (0, 31.2497)
  line L17 (0, 26.1825) -> (9, 31.2497)
  line L18 (10, 51.75) -> (0, 61.75)
  line L19 (0, 52.75) -> (9, 61.75)
  point P0 (4.5, -5.75)
  point P1 (4.5, 28.7161)
  point P2 (4.5, 57.25)
hole "Hole4" at (0, 34.4661, 33.5) at (0, 63, 33.5) direction (0, 0, -1) diameter 4 depth 6 counterbore diameter 4.6 counterbore depth 1.5
equation "\"d9\" = d10"
properties part number "middle_gear_holder" material "Nylon 6/6"
